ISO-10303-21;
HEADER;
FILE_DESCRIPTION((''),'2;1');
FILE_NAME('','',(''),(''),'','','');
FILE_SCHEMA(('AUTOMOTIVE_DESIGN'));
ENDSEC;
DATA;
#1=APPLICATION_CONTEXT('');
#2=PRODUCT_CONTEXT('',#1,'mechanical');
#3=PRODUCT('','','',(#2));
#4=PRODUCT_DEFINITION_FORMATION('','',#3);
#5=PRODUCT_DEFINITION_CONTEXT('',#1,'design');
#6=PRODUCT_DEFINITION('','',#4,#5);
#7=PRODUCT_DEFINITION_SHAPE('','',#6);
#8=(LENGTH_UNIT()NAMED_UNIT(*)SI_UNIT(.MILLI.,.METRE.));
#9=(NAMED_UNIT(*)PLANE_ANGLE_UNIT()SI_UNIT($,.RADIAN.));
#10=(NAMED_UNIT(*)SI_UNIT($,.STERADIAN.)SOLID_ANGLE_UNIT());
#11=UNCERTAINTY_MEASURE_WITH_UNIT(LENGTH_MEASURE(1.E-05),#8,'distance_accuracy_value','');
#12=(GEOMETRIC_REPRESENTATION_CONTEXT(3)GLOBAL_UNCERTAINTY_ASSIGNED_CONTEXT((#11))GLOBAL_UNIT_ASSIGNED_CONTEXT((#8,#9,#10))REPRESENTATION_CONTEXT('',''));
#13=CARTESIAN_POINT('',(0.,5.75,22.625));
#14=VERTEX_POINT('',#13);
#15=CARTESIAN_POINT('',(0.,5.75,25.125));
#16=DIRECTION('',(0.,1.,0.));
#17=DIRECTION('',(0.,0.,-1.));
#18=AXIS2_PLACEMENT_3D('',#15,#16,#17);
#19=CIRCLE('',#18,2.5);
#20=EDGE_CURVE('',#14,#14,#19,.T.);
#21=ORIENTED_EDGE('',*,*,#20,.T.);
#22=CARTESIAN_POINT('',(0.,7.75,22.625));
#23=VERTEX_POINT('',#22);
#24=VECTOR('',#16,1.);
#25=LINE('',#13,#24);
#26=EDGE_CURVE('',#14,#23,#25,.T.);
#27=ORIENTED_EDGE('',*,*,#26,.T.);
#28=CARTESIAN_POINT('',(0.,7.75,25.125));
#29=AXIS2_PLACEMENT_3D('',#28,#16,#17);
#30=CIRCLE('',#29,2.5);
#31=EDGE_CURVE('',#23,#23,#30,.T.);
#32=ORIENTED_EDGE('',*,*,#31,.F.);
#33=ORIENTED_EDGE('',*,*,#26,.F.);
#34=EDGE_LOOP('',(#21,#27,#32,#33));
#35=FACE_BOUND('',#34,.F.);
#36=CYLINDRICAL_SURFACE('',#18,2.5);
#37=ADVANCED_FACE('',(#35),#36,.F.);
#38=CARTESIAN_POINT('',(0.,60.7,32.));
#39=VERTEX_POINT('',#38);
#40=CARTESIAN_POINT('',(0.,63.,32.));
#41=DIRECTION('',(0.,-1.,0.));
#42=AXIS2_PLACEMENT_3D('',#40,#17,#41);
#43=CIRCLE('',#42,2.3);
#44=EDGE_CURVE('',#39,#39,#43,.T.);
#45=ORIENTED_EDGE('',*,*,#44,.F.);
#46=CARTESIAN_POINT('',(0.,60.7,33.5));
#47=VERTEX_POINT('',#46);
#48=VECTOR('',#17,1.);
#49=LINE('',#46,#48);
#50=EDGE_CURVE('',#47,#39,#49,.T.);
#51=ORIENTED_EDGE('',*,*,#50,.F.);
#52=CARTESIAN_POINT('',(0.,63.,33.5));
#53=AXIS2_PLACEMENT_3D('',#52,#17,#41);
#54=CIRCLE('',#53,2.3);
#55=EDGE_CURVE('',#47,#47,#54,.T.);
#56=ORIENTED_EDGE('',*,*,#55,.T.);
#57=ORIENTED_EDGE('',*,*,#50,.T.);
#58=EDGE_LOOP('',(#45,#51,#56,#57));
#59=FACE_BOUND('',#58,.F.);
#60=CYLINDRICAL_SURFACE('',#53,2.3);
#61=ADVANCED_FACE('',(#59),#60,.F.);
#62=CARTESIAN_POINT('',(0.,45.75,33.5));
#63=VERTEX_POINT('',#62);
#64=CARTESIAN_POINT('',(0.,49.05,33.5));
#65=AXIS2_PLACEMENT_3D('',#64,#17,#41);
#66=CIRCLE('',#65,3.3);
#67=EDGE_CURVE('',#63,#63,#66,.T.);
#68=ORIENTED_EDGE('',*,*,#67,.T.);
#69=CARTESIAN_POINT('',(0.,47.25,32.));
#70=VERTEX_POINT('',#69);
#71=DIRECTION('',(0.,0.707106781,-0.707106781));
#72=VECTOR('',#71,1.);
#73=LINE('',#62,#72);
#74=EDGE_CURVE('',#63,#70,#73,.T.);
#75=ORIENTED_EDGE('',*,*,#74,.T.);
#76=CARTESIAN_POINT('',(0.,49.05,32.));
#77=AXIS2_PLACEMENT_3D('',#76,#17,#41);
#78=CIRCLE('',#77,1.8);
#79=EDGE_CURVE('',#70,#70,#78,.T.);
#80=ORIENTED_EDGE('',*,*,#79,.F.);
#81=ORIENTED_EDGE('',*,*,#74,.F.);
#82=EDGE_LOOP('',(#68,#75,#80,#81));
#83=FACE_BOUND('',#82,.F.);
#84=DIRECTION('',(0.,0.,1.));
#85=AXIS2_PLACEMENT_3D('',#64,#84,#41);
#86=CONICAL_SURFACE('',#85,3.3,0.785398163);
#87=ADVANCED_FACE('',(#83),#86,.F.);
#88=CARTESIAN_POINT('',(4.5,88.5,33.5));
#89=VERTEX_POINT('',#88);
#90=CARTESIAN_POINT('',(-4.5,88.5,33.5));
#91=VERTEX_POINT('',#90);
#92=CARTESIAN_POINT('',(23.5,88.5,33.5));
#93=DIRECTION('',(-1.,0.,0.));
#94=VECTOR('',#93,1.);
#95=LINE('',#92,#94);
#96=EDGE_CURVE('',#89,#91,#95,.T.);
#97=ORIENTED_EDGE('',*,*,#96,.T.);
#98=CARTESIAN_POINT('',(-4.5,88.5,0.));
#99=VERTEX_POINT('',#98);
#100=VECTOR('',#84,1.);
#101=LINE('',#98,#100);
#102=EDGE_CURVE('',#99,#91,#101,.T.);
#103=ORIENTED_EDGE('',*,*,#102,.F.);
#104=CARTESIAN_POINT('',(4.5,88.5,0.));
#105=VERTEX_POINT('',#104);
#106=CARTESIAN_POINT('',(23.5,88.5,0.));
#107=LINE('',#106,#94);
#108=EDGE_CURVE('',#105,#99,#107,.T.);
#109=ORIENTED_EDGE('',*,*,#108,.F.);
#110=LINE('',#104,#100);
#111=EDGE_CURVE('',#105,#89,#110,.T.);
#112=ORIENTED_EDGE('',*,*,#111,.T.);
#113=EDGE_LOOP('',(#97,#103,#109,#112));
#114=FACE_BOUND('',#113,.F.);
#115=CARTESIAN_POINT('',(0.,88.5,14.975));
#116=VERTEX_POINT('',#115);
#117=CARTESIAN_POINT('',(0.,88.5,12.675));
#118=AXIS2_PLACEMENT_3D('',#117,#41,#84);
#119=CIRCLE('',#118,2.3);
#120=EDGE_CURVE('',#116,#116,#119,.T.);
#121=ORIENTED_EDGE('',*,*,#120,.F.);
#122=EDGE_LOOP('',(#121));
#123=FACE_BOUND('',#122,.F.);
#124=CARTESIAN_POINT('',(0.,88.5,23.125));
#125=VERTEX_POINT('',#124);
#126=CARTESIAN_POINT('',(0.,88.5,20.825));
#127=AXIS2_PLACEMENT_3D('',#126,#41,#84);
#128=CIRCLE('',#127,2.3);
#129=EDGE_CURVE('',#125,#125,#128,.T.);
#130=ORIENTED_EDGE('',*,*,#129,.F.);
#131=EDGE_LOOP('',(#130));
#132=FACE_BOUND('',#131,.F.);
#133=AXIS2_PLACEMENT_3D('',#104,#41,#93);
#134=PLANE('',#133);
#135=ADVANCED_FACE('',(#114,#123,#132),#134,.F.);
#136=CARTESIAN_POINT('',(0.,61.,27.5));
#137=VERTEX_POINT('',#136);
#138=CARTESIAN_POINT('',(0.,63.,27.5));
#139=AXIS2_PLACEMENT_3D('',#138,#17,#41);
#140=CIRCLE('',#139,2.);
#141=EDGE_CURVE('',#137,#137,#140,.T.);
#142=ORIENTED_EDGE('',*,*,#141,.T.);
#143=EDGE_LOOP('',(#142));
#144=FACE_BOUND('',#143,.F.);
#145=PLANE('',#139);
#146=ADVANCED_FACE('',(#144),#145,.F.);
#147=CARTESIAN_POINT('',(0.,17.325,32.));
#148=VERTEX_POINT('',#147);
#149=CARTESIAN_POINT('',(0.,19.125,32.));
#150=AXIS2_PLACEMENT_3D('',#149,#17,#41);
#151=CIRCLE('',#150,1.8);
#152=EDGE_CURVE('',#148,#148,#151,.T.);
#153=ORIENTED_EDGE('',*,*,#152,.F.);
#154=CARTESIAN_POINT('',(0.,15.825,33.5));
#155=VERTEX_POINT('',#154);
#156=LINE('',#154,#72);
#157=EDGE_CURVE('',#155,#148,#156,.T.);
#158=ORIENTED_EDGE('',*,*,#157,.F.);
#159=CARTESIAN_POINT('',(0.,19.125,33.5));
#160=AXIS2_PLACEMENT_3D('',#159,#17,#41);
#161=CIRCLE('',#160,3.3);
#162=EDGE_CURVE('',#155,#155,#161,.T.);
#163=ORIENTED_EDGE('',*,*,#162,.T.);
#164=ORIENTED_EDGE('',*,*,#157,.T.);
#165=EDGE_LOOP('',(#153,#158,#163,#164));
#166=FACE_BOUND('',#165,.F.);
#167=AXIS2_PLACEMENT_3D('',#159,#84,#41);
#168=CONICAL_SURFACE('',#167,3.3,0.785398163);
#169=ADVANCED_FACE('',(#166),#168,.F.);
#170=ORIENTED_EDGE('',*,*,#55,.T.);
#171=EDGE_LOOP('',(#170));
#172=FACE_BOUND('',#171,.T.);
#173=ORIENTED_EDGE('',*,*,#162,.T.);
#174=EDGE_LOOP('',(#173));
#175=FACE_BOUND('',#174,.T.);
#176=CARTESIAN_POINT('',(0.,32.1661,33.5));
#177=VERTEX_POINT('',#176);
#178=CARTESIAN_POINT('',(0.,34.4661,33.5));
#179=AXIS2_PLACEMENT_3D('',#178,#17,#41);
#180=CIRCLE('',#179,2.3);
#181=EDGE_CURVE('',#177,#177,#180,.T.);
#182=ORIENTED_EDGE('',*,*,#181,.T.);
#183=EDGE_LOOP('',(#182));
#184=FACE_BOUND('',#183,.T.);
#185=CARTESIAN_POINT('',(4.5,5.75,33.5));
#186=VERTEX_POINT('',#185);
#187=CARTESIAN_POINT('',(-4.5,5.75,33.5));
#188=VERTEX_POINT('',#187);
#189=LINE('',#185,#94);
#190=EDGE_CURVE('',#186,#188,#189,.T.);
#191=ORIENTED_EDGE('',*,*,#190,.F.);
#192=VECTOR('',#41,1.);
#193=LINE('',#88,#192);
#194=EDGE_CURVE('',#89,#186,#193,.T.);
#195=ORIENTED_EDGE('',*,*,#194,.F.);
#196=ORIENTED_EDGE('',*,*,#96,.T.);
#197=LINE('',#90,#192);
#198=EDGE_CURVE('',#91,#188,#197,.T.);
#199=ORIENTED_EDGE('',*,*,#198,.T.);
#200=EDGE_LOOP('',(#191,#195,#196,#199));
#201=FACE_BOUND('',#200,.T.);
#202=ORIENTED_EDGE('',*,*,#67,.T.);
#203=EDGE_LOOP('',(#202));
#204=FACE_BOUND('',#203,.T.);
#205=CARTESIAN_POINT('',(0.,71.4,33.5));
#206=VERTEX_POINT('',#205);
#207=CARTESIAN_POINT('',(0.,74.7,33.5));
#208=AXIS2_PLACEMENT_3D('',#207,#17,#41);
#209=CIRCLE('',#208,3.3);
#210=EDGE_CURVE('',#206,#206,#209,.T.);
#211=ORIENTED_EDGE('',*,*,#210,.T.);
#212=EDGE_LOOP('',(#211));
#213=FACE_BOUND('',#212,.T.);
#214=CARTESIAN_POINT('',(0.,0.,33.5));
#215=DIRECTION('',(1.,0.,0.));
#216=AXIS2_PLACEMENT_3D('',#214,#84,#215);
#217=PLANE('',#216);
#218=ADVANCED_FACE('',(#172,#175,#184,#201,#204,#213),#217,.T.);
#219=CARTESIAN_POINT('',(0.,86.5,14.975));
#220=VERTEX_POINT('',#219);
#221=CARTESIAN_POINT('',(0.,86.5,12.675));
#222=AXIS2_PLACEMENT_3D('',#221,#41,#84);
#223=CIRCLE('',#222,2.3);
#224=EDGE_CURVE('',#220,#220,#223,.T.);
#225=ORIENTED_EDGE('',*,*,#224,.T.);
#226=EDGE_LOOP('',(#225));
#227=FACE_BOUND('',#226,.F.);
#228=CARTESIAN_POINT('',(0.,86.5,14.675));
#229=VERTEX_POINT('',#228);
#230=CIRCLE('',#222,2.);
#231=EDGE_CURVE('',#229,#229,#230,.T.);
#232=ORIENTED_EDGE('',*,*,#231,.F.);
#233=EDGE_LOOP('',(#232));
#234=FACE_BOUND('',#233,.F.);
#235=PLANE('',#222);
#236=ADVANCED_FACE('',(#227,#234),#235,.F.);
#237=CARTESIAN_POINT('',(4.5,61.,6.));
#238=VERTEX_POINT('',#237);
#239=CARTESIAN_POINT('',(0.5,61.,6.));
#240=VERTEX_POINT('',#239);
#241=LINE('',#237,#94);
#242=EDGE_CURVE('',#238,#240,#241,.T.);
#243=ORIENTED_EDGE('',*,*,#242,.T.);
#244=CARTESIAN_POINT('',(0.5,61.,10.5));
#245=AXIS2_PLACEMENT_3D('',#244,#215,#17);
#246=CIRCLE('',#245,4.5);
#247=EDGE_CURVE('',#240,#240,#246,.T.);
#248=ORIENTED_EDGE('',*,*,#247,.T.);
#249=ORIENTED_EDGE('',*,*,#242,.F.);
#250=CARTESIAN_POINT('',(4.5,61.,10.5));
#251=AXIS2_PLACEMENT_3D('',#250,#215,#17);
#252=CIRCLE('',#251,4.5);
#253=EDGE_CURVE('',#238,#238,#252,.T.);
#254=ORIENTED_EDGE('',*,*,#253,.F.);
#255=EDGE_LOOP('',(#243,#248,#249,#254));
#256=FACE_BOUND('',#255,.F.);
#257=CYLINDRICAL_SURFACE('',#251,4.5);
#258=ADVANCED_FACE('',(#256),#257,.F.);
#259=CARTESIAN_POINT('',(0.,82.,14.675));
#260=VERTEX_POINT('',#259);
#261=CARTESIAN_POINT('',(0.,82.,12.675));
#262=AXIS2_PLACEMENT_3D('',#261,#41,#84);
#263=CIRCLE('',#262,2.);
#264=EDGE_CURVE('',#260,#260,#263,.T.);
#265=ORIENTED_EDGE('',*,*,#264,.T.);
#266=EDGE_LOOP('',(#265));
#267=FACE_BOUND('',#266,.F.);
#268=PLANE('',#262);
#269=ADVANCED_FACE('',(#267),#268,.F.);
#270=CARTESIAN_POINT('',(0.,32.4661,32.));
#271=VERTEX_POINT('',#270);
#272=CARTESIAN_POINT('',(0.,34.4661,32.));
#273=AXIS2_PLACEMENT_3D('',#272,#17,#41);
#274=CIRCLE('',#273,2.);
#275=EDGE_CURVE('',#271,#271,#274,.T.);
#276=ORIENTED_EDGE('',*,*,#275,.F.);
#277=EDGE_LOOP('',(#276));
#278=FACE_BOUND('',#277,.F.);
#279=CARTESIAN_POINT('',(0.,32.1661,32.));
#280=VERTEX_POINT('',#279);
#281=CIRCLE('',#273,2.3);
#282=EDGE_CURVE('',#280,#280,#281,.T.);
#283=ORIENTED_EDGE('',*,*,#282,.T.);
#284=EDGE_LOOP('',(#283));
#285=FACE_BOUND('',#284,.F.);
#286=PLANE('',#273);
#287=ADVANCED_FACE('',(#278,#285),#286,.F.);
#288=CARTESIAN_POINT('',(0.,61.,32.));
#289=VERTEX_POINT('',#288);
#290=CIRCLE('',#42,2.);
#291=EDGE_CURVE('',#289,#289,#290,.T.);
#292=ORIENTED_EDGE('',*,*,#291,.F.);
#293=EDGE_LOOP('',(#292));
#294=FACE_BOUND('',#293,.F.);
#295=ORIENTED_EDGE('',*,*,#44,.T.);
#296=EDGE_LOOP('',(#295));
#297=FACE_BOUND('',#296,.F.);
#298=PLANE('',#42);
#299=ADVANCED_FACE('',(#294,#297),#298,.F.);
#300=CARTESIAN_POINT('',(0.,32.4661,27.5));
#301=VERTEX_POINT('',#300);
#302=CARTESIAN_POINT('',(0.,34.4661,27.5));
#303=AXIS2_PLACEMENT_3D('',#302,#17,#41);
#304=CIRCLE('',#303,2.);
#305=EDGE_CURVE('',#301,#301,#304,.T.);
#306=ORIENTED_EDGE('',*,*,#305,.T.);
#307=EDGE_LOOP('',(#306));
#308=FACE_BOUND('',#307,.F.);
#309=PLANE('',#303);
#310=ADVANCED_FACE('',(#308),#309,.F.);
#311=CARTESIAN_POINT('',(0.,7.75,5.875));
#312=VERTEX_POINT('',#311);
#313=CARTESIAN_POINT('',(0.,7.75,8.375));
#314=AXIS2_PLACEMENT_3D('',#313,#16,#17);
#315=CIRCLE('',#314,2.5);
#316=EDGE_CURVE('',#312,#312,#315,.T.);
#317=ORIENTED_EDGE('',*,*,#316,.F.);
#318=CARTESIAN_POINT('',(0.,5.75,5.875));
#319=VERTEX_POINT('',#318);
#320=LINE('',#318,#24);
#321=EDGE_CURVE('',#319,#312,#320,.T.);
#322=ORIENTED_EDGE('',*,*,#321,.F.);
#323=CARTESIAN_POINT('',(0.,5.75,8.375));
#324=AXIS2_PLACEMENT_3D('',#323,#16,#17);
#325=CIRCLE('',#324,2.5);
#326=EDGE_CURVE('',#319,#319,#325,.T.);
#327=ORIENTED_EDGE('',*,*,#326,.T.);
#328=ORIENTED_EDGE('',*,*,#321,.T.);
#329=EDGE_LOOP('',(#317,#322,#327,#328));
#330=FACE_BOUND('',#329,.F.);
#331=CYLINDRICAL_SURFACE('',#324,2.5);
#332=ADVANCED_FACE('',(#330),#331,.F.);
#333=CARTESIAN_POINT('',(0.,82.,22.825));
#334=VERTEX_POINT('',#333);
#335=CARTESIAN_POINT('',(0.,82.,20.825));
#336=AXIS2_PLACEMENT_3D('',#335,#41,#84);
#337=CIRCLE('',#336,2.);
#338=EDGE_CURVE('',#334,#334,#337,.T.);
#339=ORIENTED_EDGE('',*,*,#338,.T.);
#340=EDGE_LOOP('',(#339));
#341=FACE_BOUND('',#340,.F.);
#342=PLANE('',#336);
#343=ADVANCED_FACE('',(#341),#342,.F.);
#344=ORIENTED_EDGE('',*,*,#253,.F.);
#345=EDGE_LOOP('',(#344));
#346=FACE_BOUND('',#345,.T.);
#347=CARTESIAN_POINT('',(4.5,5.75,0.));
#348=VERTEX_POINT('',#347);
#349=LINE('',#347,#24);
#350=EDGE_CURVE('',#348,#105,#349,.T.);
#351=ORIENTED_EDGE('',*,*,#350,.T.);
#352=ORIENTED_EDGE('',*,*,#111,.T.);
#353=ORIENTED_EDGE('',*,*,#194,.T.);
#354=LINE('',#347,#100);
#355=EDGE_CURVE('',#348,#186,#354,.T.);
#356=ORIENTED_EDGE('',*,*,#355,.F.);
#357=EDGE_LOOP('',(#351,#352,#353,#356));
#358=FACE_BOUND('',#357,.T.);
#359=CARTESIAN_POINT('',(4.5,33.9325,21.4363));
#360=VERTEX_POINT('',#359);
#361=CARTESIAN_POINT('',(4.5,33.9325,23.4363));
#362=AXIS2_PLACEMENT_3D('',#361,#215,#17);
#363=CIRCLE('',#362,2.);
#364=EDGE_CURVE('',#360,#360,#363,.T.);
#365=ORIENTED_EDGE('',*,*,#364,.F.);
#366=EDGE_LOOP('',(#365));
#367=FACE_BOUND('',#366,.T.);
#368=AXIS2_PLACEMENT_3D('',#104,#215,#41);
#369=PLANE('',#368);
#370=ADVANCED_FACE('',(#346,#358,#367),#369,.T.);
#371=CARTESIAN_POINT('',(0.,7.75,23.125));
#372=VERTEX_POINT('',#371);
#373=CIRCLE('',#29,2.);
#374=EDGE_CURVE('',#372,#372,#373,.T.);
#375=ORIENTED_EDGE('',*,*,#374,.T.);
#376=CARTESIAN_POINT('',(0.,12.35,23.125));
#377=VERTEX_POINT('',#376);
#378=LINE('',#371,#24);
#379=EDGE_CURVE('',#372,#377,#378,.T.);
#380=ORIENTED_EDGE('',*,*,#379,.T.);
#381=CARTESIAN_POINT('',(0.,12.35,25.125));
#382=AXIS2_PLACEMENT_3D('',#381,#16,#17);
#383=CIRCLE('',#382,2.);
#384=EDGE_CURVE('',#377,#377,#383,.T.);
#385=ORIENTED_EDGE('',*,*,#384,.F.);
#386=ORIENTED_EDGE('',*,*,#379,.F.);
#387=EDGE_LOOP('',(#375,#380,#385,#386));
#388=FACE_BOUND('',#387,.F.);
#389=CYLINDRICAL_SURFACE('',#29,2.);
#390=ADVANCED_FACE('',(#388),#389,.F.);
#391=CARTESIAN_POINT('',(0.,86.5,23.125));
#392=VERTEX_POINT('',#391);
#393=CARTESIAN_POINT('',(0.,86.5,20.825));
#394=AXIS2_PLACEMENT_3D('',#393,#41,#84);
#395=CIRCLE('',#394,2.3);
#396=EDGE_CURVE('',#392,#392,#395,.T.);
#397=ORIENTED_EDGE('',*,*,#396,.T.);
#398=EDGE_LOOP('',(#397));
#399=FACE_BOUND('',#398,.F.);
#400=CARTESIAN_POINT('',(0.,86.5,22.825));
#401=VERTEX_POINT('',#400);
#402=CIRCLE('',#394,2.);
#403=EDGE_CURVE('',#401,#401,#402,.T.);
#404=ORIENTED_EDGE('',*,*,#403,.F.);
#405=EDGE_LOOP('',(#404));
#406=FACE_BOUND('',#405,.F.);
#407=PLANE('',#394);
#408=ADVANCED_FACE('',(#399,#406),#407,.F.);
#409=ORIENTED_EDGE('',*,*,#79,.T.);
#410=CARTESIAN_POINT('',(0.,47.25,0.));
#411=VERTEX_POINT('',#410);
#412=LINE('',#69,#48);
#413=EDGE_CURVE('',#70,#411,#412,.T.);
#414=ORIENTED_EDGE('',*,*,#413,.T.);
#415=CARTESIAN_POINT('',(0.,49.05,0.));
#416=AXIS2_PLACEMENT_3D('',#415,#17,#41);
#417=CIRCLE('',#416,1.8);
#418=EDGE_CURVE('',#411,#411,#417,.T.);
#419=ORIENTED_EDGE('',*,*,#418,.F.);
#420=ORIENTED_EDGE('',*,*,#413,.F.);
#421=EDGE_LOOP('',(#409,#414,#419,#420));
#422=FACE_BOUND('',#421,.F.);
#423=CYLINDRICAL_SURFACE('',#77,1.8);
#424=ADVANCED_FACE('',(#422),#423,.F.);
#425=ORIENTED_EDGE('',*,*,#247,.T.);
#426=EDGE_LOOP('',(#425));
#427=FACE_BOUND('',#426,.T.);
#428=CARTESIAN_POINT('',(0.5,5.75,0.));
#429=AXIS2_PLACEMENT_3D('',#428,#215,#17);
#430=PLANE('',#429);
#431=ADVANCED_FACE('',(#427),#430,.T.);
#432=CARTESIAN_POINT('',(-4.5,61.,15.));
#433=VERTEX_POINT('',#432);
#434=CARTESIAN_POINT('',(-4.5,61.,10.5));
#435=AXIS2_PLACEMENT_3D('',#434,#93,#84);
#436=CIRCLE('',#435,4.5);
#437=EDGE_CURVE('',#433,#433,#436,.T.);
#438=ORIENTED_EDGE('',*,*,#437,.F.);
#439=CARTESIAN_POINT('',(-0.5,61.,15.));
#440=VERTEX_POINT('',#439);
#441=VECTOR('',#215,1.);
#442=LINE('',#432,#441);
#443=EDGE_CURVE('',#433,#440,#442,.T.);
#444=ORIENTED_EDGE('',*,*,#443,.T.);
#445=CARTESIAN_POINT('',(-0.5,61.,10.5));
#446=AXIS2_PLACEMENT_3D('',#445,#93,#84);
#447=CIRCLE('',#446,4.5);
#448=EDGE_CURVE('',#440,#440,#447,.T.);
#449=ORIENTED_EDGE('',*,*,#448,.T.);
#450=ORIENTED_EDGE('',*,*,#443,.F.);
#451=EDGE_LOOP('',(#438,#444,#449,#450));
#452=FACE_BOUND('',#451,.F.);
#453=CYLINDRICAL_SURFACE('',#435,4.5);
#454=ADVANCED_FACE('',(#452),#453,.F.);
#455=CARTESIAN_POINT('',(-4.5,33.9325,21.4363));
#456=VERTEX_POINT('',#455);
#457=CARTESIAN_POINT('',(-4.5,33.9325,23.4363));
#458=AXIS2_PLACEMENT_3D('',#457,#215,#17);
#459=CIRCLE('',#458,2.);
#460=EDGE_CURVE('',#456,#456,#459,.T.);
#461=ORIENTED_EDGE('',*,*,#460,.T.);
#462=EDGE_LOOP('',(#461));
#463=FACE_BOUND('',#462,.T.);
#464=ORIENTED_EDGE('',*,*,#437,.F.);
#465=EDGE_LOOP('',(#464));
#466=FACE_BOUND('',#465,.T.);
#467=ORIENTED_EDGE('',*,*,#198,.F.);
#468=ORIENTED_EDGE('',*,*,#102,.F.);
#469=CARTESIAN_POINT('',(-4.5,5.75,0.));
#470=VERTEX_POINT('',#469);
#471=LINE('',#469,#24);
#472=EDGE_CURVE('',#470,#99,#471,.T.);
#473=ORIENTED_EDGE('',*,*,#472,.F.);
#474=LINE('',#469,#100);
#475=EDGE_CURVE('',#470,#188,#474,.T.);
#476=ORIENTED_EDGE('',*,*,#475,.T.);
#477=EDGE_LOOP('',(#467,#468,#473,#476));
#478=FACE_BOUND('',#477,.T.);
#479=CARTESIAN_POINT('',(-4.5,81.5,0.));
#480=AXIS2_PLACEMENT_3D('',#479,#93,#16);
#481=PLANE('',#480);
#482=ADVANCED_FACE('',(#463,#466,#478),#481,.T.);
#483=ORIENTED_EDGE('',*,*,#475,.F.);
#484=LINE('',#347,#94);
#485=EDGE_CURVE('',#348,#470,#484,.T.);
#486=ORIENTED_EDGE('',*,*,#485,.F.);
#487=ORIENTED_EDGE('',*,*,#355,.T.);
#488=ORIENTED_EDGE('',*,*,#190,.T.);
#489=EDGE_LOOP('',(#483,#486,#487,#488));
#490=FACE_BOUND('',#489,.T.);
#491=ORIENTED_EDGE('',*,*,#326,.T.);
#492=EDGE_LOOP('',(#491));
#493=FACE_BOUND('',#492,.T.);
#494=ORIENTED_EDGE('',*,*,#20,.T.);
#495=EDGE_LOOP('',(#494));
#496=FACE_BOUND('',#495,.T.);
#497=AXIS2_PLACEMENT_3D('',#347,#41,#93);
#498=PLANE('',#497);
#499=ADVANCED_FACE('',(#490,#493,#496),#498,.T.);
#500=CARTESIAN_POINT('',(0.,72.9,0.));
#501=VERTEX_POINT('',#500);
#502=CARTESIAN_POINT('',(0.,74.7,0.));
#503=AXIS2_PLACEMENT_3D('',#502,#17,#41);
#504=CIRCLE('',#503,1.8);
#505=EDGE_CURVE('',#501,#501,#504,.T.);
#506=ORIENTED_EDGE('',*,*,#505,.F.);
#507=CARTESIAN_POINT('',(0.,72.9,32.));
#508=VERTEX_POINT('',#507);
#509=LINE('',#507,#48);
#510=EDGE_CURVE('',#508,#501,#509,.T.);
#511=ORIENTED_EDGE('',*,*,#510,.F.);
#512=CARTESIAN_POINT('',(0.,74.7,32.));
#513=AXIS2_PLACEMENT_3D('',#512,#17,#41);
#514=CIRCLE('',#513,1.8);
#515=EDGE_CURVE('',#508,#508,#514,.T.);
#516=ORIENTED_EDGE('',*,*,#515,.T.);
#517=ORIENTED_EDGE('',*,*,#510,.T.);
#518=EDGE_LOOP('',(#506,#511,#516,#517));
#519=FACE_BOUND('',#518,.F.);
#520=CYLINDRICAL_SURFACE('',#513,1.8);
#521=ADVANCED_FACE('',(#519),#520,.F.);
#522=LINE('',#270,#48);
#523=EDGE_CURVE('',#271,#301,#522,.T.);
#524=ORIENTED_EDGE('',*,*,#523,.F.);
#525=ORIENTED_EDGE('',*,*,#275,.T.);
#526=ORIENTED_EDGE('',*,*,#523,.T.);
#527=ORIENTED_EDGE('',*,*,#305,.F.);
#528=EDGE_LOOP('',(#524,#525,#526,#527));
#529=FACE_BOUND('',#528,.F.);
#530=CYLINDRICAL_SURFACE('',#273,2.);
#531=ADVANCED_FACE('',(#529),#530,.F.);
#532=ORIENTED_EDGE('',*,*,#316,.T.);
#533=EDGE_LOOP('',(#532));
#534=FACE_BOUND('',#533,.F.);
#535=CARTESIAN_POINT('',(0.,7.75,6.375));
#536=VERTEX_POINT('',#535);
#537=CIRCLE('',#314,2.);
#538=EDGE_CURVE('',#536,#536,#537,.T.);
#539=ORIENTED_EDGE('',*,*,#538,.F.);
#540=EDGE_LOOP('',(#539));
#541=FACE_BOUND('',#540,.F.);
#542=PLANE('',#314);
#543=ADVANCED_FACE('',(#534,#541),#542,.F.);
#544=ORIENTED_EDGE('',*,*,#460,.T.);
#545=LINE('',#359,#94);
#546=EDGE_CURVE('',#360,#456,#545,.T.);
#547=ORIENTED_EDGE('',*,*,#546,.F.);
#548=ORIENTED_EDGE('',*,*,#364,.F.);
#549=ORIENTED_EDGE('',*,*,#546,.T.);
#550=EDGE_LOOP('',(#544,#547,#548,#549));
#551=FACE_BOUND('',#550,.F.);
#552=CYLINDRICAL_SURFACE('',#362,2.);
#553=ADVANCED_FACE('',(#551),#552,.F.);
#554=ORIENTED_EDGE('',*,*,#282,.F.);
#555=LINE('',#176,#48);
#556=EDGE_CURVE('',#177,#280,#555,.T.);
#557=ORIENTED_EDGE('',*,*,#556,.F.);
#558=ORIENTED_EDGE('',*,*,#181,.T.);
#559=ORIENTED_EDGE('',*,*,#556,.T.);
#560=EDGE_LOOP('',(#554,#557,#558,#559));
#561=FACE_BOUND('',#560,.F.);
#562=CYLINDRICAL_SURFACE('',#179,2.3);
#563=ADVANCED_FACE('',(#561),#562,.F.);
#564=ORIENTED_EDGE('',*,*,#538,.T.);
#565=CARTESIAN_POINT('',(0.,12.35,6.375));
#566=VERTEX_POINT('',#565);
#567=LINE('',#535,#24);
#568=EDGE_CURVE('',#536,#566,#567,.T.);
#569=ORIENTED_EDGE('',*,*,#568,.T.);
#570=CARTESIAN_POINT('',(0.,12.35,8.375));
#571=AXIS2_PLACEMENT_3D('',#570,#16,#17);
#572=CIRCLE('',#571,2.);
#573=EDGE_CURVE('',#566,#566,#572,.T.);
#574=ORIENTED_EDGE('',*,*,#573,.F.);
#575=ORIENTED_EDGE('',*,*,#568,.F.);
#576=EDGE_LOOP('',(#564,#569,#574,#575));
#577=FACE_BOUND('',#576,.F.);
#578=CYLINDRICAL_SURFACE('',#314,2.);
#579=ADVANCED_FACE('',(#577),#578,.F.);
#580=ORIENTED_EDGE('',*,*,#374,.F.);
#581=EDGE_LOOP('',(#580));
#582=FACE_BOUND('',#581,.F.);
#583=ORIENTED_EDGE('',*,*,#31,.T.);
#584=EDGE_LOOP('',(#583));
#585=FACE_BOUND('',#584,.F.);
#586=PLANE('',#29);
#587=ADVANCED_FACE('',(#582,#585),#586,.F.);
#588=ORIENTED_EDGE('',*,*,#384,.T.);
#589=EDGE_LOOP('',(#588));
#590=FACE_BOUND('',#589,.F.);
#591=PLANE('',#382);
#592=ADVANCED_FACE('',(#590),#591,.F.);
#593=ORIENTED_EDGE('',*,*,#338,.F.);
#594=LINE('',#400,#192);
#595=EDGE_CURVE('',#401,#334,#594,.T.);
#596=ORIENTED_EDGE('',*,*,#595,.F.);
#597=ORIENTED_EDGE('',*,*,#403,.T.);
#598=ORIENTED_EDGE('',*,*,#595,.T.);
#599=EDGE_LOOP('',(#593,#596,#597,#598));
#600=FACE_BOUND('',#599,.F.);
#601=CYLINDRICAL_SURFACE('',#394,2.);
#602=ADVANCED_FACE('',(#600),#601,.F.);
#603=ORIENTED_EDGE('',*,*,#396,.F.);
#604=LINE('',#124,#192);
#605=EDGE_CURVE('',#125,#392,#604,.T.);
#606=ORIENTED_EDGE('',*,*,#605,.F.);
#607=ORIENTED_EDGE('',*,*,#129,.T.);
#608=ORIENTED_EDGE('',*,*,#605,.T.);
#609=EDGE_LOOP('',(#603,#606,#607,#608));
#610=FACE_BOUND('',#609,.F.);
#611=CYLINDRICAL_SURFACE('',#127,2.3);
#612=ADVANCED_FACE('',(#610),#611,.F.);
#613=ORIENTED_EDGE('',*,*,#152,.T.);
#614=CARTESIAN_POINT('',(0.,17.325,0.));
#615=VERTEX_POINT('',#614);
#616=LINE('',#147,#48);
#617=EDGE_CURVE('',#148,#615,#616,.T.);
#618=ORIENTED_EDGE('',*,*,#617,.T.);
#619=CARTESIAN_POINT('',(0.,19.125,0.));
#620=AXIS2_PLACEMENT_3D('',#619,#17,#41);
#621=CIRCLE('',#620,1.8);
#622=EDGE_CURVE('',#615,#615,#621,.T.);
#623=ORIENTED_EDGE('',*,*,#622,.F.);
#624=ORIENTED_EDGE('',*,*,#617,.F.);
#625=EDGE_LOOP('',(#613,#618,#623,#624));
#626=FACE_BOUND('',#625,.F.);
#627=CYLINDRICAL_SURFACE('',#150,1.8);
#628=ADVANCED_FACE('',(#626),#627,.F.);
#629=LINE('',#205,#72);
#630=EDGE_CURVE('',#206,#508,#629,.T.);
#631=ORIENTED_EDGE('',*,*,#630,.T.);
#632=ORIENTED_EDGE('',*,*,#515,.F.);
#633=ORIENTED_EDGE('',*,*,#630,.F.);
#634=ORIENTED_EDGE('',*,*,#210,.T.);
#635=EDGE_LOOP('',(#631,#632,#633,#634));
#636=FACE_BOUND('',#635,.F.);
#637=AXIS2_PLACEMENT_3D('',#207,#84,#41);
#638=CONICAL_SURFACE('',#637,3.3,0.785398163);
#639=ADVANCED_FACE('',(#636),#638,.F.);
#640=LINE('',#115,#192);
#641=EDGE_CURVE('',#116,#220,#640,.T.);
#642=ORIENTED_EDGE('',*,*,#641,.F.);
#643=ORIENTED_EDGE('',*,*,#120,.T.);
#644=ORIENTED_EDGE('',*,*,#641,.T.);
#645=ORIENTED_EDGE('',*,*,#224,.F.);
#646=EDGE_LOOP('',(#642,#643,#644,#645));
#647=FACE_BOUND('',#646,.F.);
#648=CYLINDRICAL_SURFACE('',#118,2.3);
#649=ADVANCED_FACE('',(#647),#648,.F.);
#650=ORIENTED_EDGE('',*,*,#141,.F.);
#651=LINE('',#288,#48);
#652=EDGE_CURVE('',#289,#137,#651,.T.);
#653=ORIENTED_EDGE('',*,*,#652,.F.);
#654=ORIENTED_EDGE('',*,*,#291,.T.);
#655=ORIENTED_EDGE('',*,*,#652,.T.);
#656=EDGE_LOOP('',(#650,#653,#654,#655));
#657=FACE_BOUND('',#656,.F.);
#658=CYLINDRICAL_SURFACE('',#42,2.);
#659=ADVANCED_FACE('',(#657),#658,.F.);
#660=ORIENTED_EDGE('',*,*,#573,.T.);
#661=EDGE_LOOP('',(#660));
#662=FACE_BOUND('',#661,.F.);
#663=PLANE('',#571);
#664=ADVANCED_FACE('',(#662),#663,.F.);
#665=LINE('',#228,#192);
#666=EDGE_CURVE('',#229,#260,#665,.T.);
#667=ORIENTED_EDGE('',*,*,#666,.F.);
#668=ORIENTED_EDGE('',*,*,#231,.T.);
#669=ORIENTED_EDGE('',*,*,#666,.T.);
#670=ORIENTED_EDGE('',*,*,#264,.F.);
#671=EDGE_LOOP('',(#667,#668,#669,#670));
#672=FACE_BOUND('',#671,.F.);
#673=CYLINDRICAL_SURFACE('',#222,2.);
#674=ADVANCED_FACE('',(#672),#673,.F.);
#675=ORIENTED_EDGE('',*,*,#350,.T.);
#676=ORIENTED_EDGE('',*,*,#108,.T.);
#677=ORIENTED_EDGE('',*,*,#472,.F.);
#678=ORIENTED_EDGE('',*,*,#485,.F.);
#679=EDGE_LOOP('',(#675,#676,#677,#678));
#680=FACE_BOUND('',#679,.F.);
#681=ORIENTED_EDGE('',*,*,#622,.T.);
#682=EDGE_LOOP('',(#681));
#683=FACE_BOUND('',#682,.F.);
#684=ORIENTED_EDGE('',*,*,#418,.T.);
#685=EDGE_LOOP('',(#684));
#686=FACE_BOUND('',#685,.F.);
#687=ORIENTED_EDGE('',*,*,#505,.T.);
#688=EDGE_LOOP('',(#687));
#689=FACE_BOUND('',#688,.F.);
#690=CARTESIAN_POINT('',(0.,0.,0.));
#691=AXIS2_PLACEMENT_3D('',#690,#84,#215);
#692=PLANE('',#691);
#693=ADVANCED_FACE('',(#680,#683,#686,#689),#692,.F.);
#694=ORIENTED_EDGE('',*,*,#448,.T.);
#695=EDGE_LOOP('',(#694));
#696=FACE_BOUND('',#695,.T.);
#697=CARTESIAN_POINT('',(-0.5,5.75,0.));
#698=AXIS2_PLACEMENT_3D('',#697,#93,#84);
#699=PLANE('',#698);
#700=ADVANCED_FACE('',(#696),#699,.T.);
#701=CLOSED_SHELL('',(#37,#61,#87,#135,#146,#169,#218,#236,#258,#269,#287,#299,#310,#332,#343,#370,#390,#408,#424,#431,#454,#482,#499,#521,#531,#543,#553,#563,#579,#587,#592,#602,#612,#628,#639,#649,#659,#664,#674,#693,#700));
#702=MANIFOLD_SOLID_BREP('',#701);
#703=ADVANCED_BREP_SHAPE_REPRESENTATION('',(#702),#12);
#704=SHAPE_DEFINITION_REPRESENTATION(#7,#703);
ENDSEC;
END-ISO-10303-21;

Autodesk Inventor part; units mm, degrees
ref_plane "YZ Plane" through (0, 0, 0) normal (1, 0, 0) x (0, 1, 0)
ref_plane "XZ Plane" through (0, 0, 0) normal (0, 1, 0) x (-1, 0, 0)
ref_plane "Work Plane1" through (0, 0, 0) normal (0, 0, 1) x (1, 0, 0)
ref_plane "Work Plane2" through (-89, -40.3889, 33.5) normal (0, 0, 1) x (1, 0, 0)
sketch "Sketch1" plane through (0, 0, 0) normal (0, 0, 1) x (1, 0, 0)
  line L0 (23.5, 88.5) -> (-23.5, 88.5) projected
  line L1 (-23.5, 88.5) -> (-23.5, 36.5) projected
  line L2 (-26.5, 33.5) -> (-89, 33.5) projected
  line L3 (-89, 33.5) -> (-89, -72.5) projected
  line L4 (-89, -72.5) -> (-77, -72.5) projected
  line L5 (-74, -75.5) -> (-74, -93.5) projected
  line L6 (-74, -93.5) -> (74, -93.5) projected
  line L7 (74, -93.5) -> (74, -75.5) projected
  line L8 (77, -72.5) -> (89, -72.5) projected
  line L9 (89, -72.5) -> (89, 33.5) projected
  line L10 (89, 33.5) -> (26.5, 33.5) projected
  line L11 (23.5, 36.5) -> (23.5, 88.5) projected
  line L12 (-4.5, 81.5) -> (-4.5, 36.5) projected
  line L13 (-7.5, 33.5) -> (-13.5, 33.5) projected
  line L14 (-16.5, 36.5) -> (-16.5, 81.5) projected
  line L15 (-13.5, 84.5) -> (-7.5, 84.5) projected
  line L16 (16.5, 81.5) -> (16.5, 36.5) projected
  line L17 (13.5, 33.5) -> (7.5, 33.5) projected
  line L18 (4.5, 36.5) -> (4.5, 81.5) projected
  line L19 (7.5, 84.5) -> (13.5, 84.5) projected
  line L20 (-4.5, 88.5) -> (4.5, 88.5)
  line L21 (4.5, 88.5) -> (4.5, 5.75)
  line L22 (4.5, 5.75) -> (-4.5, 5.75)
  line L23 (-4.5, 5.75) -> (-4.5, 88.5)
  line L24 (-32.2, 4.75) -> (-59.9, 4.75)
  arc A0 (13.5, 33.5) -> (16.5, 36.5) centre (13.5, 36.5) ccw projected
  arc A1 (4.5, 36.5) -> (7.5, 33.5) centre (7.5, 36.5) ccw projected
  arc A2 (7.5, 84.5) -> (4.5, 81.5) centre (7.5, 81.5) ccw projected
  arc A3 (16.5, 81.5) -> (13.5, 84.5) centre (13.5, 81.5) ccw projected
  arc A4 (-4.5, 81.5) -> (-7.5, 84.5) centre (-7.5, 81.5) ccw projected
  arc A5 (-7.5, 33.5) -> (-4.5, 36.5) centre (-7.5, 36.5) ccw projected
  arc A6 (-16.5, 36.5) -> (-13.5, 33.5) centre (-13.5, 36.5) ccw projected
  arc A7 (-13.5, 84.5) -> (-16.5, 81.5) centre (-13.5, 81.5) ccw projected
  arc A8 (-26.5, 33.5) -> (-23.5, 36.5) centre (-26.5, 36.5) ccw projected
  arc A9 (-74, -75.5) -> (-77, -72.5) centre (-77, -75.5) ccw projected
  arc A10 (77, -72.5) -> (74, -75.5) centre (77, -75.5) ccw projected
  arc A11 (23.5, 36.5) -> (26.5, 33.5) centre (26.5, 36.5) ccw projected
  circle A12 centre (39.125, 25.9125) radius 1.0065 projected
  circle A13 centre (72.95, 12.275) radius 1.0065 projected
  circle A14 centre (-39.125, 12.3375) radius 1.0065 projected
  circle A15 centre (-72.95, 25.975) radius 1.0065 projected
  circle A16 centre (-72.95, 12.275) radius 1.0065 projected
  circle A17 centre (-39.125, 25.9125) radius 1.0065 projected
  circle A18 centre (72.95, 25.975) radius 1.0065 projected
  circle A19 centre (39.125, 12.3375) radius 1.0065 projected
  circle A20 centre (-24.1, -73.1) radius 1.2295 projected
  circle A21 centre (-42.4984, -44.6666) radius 1.2295 projected
  circle A22 centre (-79, -42.3889) radius 1.2295 projected
  circle A23 centre (-19.5, 28.875) radius 1.2295 projected
  circle A24 centre (19.5, 9.55) radius 1.2295 projected
  circle A25 centre (19.5, 47.3) radius 1.2295 projected
  circle A26 centre (-19.5, 47.3) radius 1.2295 projected
  circle A27 centre (0, 74.7) radius 1.2295 projected
  circle A28 centre (-19.4231, 74.8077) radius 1.2295 projected
  circle A29 centre (19.5, 74.7) radius 1.2295 projected
  circle A30 centre (0, 49.05) radius 1.2295 projected
  circle A31 centre (19.5, 28.875) radius 1.2295 projected
  circle A32 centre (0, 19.125) radius 1.2295 projected
  circle A33 centre (-19.5, 9.55) radius 1.2295 projected
  circle A34 centre (24.1, -73.1) radius 1.2295 projected
  circle A35 centre (42.5, -44.6649) radius 1.2295 projected
  circle A36 centre (79, -42.3889) radius 1.2295 projected
  circle A37 centre (21.5, -85.5) radius 1.8 projected
  circle A38 centre (-64.5, -85.5) radius 1.8 projected
  circle A39 centre (-21.5, -85.5) radius 1.8 projected
  circle A40 centre (64.5, -85.5) radius 1.8 projected
  line L25 (-58.2315, -77.6013) -> (-80.7685, -61.1541) projected
  line L26 (-82, -58.7308) -> (-82, -48.3889) projected
  line L27 (-75.8885, -45.3972) -> (-47.1423, -47.5438) projected
  line L28 (-21.1, -26.5751) -> (-21.1, -22.0813) projected
  line L29 (-46.9357, -41.5592) -> (-76, -39.3889) projected
  line L30 (-82, -36.3889) -> (-82, 1.75) projected
  line L31 (32.9914, 4.75) -> (79, 4.75) projected
  line L32 (82, -48.3889) -> (82, -58.7308) projected
  line L33 (76, -39.3889) -> (46.9371, -41.5577) projected
  line L34 (21.1, -22.0813) -> (21.1, -26.5749) projected
  line L35 (47.144, -47.5423) -> (76, -45.3889) projected
  line L36 (82, 1.75) -> (82, -36.3889) projected
  line L37 (80.7685, -61.1541) -> (58.2315, -77.6013) projected
  line L38 (57, -80.0246) -> (57, -87.5) projected
  arc A41 (55, -89.5) -> (57, -87.5) centre (55, -87.5) ccw projected
  line L39 (55, -89.5) -> (31, -89.5) projected
  arc A42 (29, -87.5) -> (31, -89.5) centre (31, -87.5) ccw projected
  line L40 (29, -87.5) -> (29, -79.2522) projected
  line L41 (14, -79.5039) -> (14, -87.5) projected
  arc A43 (12, -89.5) -> (14, -87.5) centre (12, -87.5) ccw projected
  line L42 (12, -89.5) -> (-12, -89.5) projected
  arc A44 (-14, -87.5) -> (-12, -89.5) centre (-12, -87.5) ccw projected
  line L43 (-14, -87.5) -> (-14, -79.5039) projected
  line L44 (-29, -79.2522) -> (-29, -87.5) projected
  arc A45 (-31, -89.5) -> (-29, -87.5) centre (-31, -87.5) ccw projected
  line L45 (-31, -89.5) -> (-55, -89.5) projected
  arc A46 (-57, -87.5) -> (-55, -89.5) centre (-55, -87.5) ccw projected
  line L46 (-57, -87.5) -> (-57, -80.0246) projected
  line L47 (-66.95, 28.9125) -> (-45.125, 28.9125) projected
  line L48 (-42.125, 25.9125) -> (-42.125, 12.275) projected
  line L49 (-45.125, 9.275) -> (-66.95, 9.275) projected
  line L50 (-69.95, 12.275) -> (-69.95, 25.9125) projected
  line L51 (-16.5, 12.75) -> (-16.5, 25.5) projected
  line L52 (-13.5, 28.5) -> (-7.5, 28.5) projected
  line L53 (-4.5, 25.5) -> (-4.5, 12.75) projected
  line L54 (-7.5, 9.75) -> (-13.5, 9.75) projected
  line L55 (66.95, 9.3375) -> (45.125, 9.3375) projected
  line L56 (42.125, 12.3375) -> (42.125, 25.975) projected
  line L57 (45.125, 28.975) -> (66.95, 28.975) projected
  line L58 (69.95, 25.975) -> (69.95, 12.3375) projected
  line L59 (4.5, 12.75) -> (4.5, 25.5) projected
  line L60 (7.5, 28.5) -> (13.5, 28.5) projected
  line L61 (16.5, 25.5) -> (16.5, 12.75) projected
  line L62 (13.5, 9.75) -> (7.5, 9.75) projected
  line L63 (44.5181, -40.6102) -> (28.0504, -22.9209) projected
  line L64 (27.268, -20.5154) -> (30.0132, 2.1113) projected
  line L65 (-44.7206, -49.1201) -> (-29.3549, -77.8368) projected
  line L66 (-79, 4.75) -> (-32.9914, 4.75) projected
  line L67 (-30.0132, 2.1113) -> (-27.268, -20.5155) projected
  line L68 (-28.0502, -22.9208) -> (-44.5164, -40.6115) projected
  line L69 (29.3549, -77.8368) -> (44.7222, -49.1185) projected
  line L70 (-14.6042, -77.6983) -> (-37.8537, -46.8489) projected
  line L71 (-37.4786, -42.8259) -> (-22.0793, -28.7924) projected
  line L72 (-21.1218, -21.72) -> (-23.9255, 1.3887) projected
  line L73 (-20.9474, 4.75) -> (20.9474, 4.75) projected
  line L74 (23.9255, 1.3887) -> (21.1218, -21.72) projected
  line L75 (22.0795, -28.7925) -> (37.4798, -42.8243) projected
  line L76 (37.8551, -46.8475) -> (14.6042, -77.6983) projected
  circle A47 centre (-78, -67.1725) radius 1.2295 projected
  arc A48 (79, -39.3889) -> (82, -36.3889) centre (79, -36.3889) ccw projected
  arc A49 (44.5181, -40.6102) -> (46.9371, -41.5577) centre (46.7138, -38.566) ccw projected
  arc A50 (27.268, -20.5154) -> (28.0504, -22.9209) centre (30.2461, -20.8767) ccw projected
  arc A51 (32.9914, 4.75) -> (30.0132, 2.1113) centre (32.9914, 1.75) ccw projected
  arc A52 (82, 1.75) -> (79, 4.75) centre (79, 1.75) ccw projected
  arc A53 (-42.125, 25.9125) -> (-45.125, 28.9125) centre (-45.125, 25.9125) ccw projected
  arc A54 (-45.125, 9.275) -> (-42.125, 12.275) centre (-45.125, 12.275) ccw projected
  arc A55 (-69.95, 12.275) -> (-66.95, 9.275) centre (-66.95, 12.275) ccw projected
  arc A56 (-66.95, 28.9125) -> (-69.95, 25.9125) centre (-66.95, 25.9125) ccw projected
  arc A57 (-13.5, 28.5) -> (-16.5, 25.5) centre (-13.5, 25.5) ccw projected
  arc A58 (-4.5, 25.5) -> (-7.5, 28.5) centre (-7.5, 25.5) ccw projected
  arc A59 (-7.5, 9.75) -> (-4.5, 12.75) centre (-7.5, 12.75) ccw projected
  arc A60 (-16.5, 12.75) -> (-13.5, 9.75) centre (-13.5, 12.75) ccw projected
  arc A61 (58.2315, -77.6013) -> (57, -80.0246) centre (60, -80.0246) ccw projected
  arc A62 (29.3549, -77.8368) -> (29, -79.2522) centre (32, -79.2522) ccw projected
  arc A63 (47.144, -47.5423) -> (44.7222, -49.1185) centre (47.3673, -50.5339) ccw projected
  arc A64 (82, -48.3889) -> (79, -45.3889) centre (79, -48.3889) ccw projected
  arc A65 (80.7685, -61.1541) -> (82, -58.7308) centre (79, -58.7308) ccw projected
  arc A66 (-21.1, -22.0813) -> (-21.1218, -21.72) centre (-24.1, -22.0813) ccw projected
  arc A67 (-20.9474, 4.75) -> (-23.9255, 1.3887) centre (-20.9474, 1.75) ccw projected
  arc A68 (23.9255, 1.3887) -> (20.9474, 4.75) centre (20.9474, 1.75) ccw projected
  arc A69 (21.1218, -21.72) -> (21.1, -22.0813) centre (24.1, -22.0813) ccw projected
  arc A70 (21.1, -26.5749) -> (22.0795, -28.7925) centre (24.1, -26.5749) ccw projected
  arc A71 (37.8551, -46.8475) -> (37.4798, -42.8243) centre (35.4593, -45.0419) ccw projected
  arc A72 (14.6042, -77.6983) -> (14, -79.5039) centre (17, -79.5039) ccw projected
  arc A73 (-14, -79.5039) -> (-14.6042, -77.6983) centre (-17, -79.5039) ccw projected
  arc A74 (-37.4786, -42.8259) -> (-37.8537, -46.8489) centre (-35.4579, -45.0433) ccw projected
  arc A75 (-22.0793, -28.7924) -> (-21.1, -26.5751) centre (-24.1, -26.5751) ccw projected
  arc A76 (-82, -36.3889) -> (-79, -39.3889) centre (-79, -36.3889) ccw projected
  arc A77 (-79, 4.75) -> (-82, 1.75) centre (-79, 1.75) ccw projected
  arc A78 (-30.0132, 2.1113) -> (-32.9914, 4.75) centre (-32.9914, 1.75) ccw projected
  arc A79 (-28.0502, -22.9208) -> (-27.268, -20.5155) centre (-30.2461, -20.8769) ccw projected
  arc A80 (-46.9357, -41.5592) -> (-44.5164, -40.6115) centre (-46.7123, -38.5676) ccw projected
  arc A81 (7.5, 28.5) -> (4.5, 25.5) centre (7.5, 25.5) ccw projected
  arc A82 (16.5, 25.5) -> (13.5, 28.5) centre (13.5, 25.5) ccw projected
  arc A83 (13.5, 9.75) -> (16.5, 12.75) centre (13.5, 12.75) ccw projected
  arc A84 (4.5, 12.75) -> (7.5, 9.75) centre (7.5, 12.75) ccw projected
  arc A85 (-57, -80.0246) -> (-58.2315, -77.6013) centre (-60, -80.0246) ccw projected
  arc A86 (-82, -58.7308) -> (-80.7685, -61.1541) centre (-79, -58.7308) ccw projected
  arc A87 (-75.8885, -45.3972) -> (-76.1119, -45.3889) centre (-76.1119, -48.3889) ccw projected
  arc A88 (-44.7206, -49.1201) -> (-47.1423, -47.5438) centre (-47.3657, -50.5355) ccw projected
  arc A89 (-29, -79.2522) -> (-29.3549, -77.8368) centre (-32, -79.2522) ccw projected
  arc A90 (42.125, 12.3375) -> (45.125, 9.3375) centre (45.125, 12.3375) ccw projected
  arc A91 (45.125, 28.975) -> (42.125, 25.975) centre (45.125, 25.975) ccw projected
  arc A92 (69.95, 25.975) -> (66.95, 28.975) centre (66.95, 25.975) ccw projected
  arc A93 (66.95, 9.3375) -> (69.95, 12.3375) centre (66.95, 12.3375) ccw projected
  circle A94 centre (78, -67.1725) radius 1.2295 projected
  line L77 (-22.5, 25.9125) -> (-22.5, 12.55) projected
  arc A95 (-25.5, 9.55) -> (-22.5, 12.55) centre (-25.5, 12.55) ccw projected
  line L78 (-25.5, 9.55) -> (-33.125, 9.55) projected
  arc A96 (-36.125, 12.55) -> (-33.125, 9.55) centre (-33.125, 12.55) ccw projected
  line L79 (-36.125, 12.55) -> (-36.125, 25.9125) projected
  arc A97 (-33.125, 28.9125) -> (-36.125, 25.9125) centre (-33.125, 25.9125) ccw projected
  line L80 (-33.125, 28.9125) -> (-25.5, 28.9125) projected
  arc A98 (-22.5, 25.9125) -> (-25.5, 28.9125) centre (-25.5, 25.9125) ccw projected
  line L81 (76, -45.3889) -> (79, -45.3889) projected
  line L82 (79, -39.3889) -> (76, -39.3889) projected
  line L83 (33.125, 9.275) -> (25.5, 9.275) projected
  arc A99 (22.5, 12.275) -> (25.5, 9.275) centre (25.5, 12.275) ccw projected
  line L84 (22.5, 12.275) -> (22.5, 25.9125) projected
  arc A100 (25.5, 28.9125) -> (22.5, 25.9125) centre (25.5, 25.9125) ccw projected
  line L85 (25.5, 28.9125) -> (33.125, 28.9125) projected
  arc A101 (36.125, 25.9125) -> (33.125, 28.9125) centre (33.125, 25.9125) ccw projected
  line L86 (36.125, 25.9125) -> (36.125, 12.275) projected
  arc A102 (33.125, 9.275) -> (36.125, 12.275) centre (33.125, 12.275) ccw projected
  line L87 (-83, 28.975) -> (-78.95, 28.975) projected
  arc A103 (-75.95, 25.975) -> (-78.95, 28.975) centre (-78.95, 25.975) ccw projected
  line L88 (-75.95, 25.975) -> (-75.95, 12.275) projected
  arc A104 (-78.95, 9.275) -> (-75.95, 12.275) centre (-78.95, 12.275) ccw projected
  line L89 (-78.95, 9.275) -> (-83, 9.275) projected
  arc A105 (-86, 12.275) -> (-83, 9.275) centre (-83, 12.275) ccw projected
  line L90 (-86, 12.275) -> (-86, 25.975) projected
  arc A106 (-83, 28.975) -> (-86, 25.975) centre (-83, 25.975) ccw projected
  arc A107 (-79, -45.3889) -> (-82, -48.3889) centre (-79, -48.3889) ccw projected
  line L91 (-79, -45.3889) -> (-76.1119, -45.3889) projected
  line L92 (-76, -39.3889) -> (-79, -39.3889) projected
  line L93 (78.95, 28.975) -> (83, 28.975) projected
  arc A108 (86, 25.975) -> (83, 28.975) centre (83, 25.975) ccw projected
  line L94 (86, 25.975) -> (86, 12.275) projected
  arc A109 (83, 9.275) -> (86, 12.275) centre (83, 12.275) ccw projected
  line L95 (83, 9.275) -> (78.95, 9.275) projected
  arc A110 (75.95, 12.275) -> (78.95, 9.275) centre (78.95, 12.275) ccw projected
  line L96 (75.95, 12.275) -> (75.95, 25.975) projected
  arc A111 (78.95, 28.975) -> (75.95, 25.975) centre (78.95, 25.975) ccw projected
  circle A112 centre (24.1, -24.9) radius 1.2295 projected
  circle A113 centre (-24.1, -24.9) radius 1.2295 projected
  point P0 (0, 0)
  point P1 (-4.5, 81.5)
  point P2 (-4.5, 36.5)
  point P3 (7.5, 81.5)
  point P4 (13.5, 81.5)
  point P5 (-7.5, 81.5)
  point P6 (-13.5, 81.5)
  point P7 (39, -44.2094)
  point P8 (-4.5, 28.5)
  point P9 (-4.5, 9.75)
  point P10 (4.5, 9.75)
  point P11 (4.5, 28.5)
  point P12 (-79, -67.8878)
  point P13 (-79, -66.4572)
  dimension "d41" = 1
extrude "Extrusion1" add sketch "Sketch1" along normal up to surface (33.5 mm away) contours L21 L18 L22 L23 L12 L0 | A27 | A30 | A32
sketch "Sketch2" plane through (4.5, 5.75, 0) normal (1, 0, 0) x (0, 0, -1)
  circle A0 centre (-23.4363, 28.1825) radius 2 projected
  point P0 (0, -5.75)
extrude "Extrusion2" cut sketch "Sketch2" against normal blind 10
sketch "Sketch3" plane through (4.5, 5.75, 0) normal (1, 0, 0) x (0, 0, -1)
  circle A0 centre (-10.5, 55.25) radius 4.5 projected
  point P0 (0, -5.75)
extrude "Extrusion3" cut sketch "Sketch3" against normal blind 4
sketch "Sketch4" plane through (-4.5, 5.75, 0) normal (-1, 0, 0) x (0, 0, 1)
  circle A0 centre (10.5, 55.25) radius 4.5 projected
  point P0 (0, -5.75)
extrude "Extrusion4" cut sketch "Sketch4" against normal blind 4
sketch "Sketch5" plane through (-4.5, 5.75, 33.5) normal (0, 0, 1) x (1, 0, 0)
  line L0 (5, 59.75) -> (5, 50.75) projected
  line L1 (4, 50.75) -> (4, 59.75) projected
  line L2 (9, 26.1825) -> (0, 26.1825) projected
  line L3 (9, 30.1825) -> (0, 30.1825) projected
  line L4 (17, 78.15) -> (-8, 78.15)
  line L5 (-8, 35.85) -> (17, 35.85)
  line L6 (9, 82.75) -> (9, 0) projected
  line L7 (0, 50.75) -> (0, 59.75) projected
  line L8 (9, 35.85) -> (0, 35.85)
  line L9 (0, 35.85) -> (0, 50.75)
  line L10 (0, 50.75) -> (9, 50.75)
  line L11 (9, 50.75) -> (9, 35.85)
  line L12 (0, 0) -> (0, 82.75) projected
  line L13 (9, 78.15) -> (0, 78.15)
  line L14 (0, 78.15) -> (0, 59.75)
  line L15 (0, 59.75) -> (9, 59.75)
  line L16 (9, 59.75) -> (9, 78.15)
  line L17 (-18, 6.625) -> (-18, 20.125) projected
  line L18 (-18, 13.375) -> (27, 13.375)
  line L19 (9, 35.85) -> (0, 50.75)
  line L20 (9, 59.75) -> (9, 50.75) projected
  line L21 (0, 35.85) -> (9, 50.75)
  line L22 (9, 59.75) -> (0, 78.15)
  line L23 (0, 59.75) -> (9, 78.15)
  point P0 (4.5, -5.75)
  point P1 (4.5, 13.375)
  point P2 (4.5, 43.3)
  point P3 (4.5, 68.95)
  dimension "d9" = 4.5
  dimension "d10" = 4.5
hole "Hole1" at (0, 19.125, 33.5) at (0, 49.05, 33.5) at (0, 74.7, 33.5) direction (0, 0, -1) diameter 3.6 end through all countersink diameter 6.6 countersink angle 90 clearance for "Countersunk Flat Head Screw ISO 2009/7046" size "M3" standard "ISO"
sketch "Sketch6" plane through (-4.5, 5.75, 0) normal (0, -1, 0) x (1, 0, 0)
  line L0 (9, 33.5) -> (0, 33.5) projected
  line L1 (0, 0) -> (0, 33.5) projected
  line L2 (0, 0) -> (9, 0) projected
  line L3 (9, 0) -> (9, 33.5) projected
  line L4 (0, 16.75) -> (9, 16.75)
  line L5 (9, 16.75) -> (0, 33.5)
  line L6 (9, 33.5) -> (0, 16.75)
  line L7 (0, 16.75) -> (9, 0)
  line L8 (9, 16.75) -> (0, 0)
  point P0 (4.5, 0)
  point P1 (4.5, 8.375)
  point P2 (4.5, 25.125)
hole "Hole2" at (0, 5.75, 8.375) at (0, 5.75, 25.125) direction (0, 1, 0) diameter 4 depth 6.6 counterbore diameter 5 counterbore depth 2
sketch "Sketch7" plane through (-4.5, 88.5, 0) normal (0, 1, 0) x (1, 0, 0)
  line L0 (0, -33.5) -> (9, -33.5) projected
  line L1 (0, -33.5) -> (9, -33.5) projected
  line L2 (9, 0) -> (9, -33.5) projected
  line L3 (9, 0) -> (0, 0) projected
  line L4 (0, 0) -> (0, -33.5) projected
  line L5 (-8, -1.4) -> (-8, -6.6) projected
  line L6 (-8, -32.1) -> (-8, -26.9) projected
  line L7 (17, -32.1) -> (17, -26.9) projected
  line L8 (17, -1.4) -> (17, -6.6) projected
  line L9 (17, -32.1) -> (-8, -32.1)
  line L10 (-8, -32.1) -> (-8, -26.9)
  line L11 (-8, -26.9) -> (17, -26.9)
  line L12 (17, -26.9) -> (17, -32.1)
  line L13 (-8, -6.6) -> (17, -6.6)
  line L14 (17, -6.6) -> (17, -1.4)
  line L15 (17, -1.4) -> (-8, -1.4)
  line L16 (-8, -1.4) -> (-8, -6.6)
  line L17 (17, -6.6) -> (-8, -6.6)
  line L18 (-8, -6.6) -> (-8, -8.6)
  line L19 (-8, -8.6) -> (17, -8.6)
  line L20 (17, -8.6) -> (17, -6.6)
  line L21 (-8, -26.9) -> (17, -26.9)
  line L22 (17, -26.9) -> (17, -24.9)
  line L23 (17, -24.9) -> (-8, -24.9)
  line L24 (-8, -24.9) -> (-8, -26.9)
  line L25 (9, 0) -> (9, -33.5) projected
  line L26 (9, -16.75) -> (0, -16.75)
  line L27 (0, 0) -> (0, -33.5) projected
  line L28 (9, -24.9) -> (0, -16.75)
  line L29 (9, -8.6) -> (0, -16.75)
  line L30 (0, -8.6) -> (9, -16.75)
  line L31 (9, -16.75) -> (0, -24.9)
  point P0 (4.5, 0)
  point P1 (4.5, -20.825)
  point P2 (4.5, -12.675)
  dimension "d25" = 2
  dimension "d26" = 2
hole "Hole3" at (0, 88.5, 20.825) at (0, 88.5, 12.675) direction (0, -1, 0) diameter 4 depth 6.5 counterbore diameter 4.6 counterbore depth 2
sketch "Sketch8" plane through (-4.5, 5.75, 33.5) normal (0, 0, 1) x (1, 0, 0)
  line L0 (26, 27.2497) -> (-17, 27.2497)
  line L1 (26, 31.2497) -> (-17, 31.2497)
  line L2 (4, 52.75) -> (-1, 52.75)
  line L3 (4, 61.75) -> (-1, 61.75)
  line L4 (10, 61.75) -> (5, 61.75)
  line L5 (9, 50.75) -> (5, 50.75) projected
  line L6 (0, 0) -> (0, 82.75) projected
  line L7 (9, 52.75) -> (0, 52.75)
  line L8 (0, 52.75) -> (0, 61.75)
  line L9 (0, 61.75) -> (9, 61.75)
  line L10 (9, 61.75) -> (9, 50.75)
  line L11 (9, 26.1825) -> (0, 26.1825) projected
  line L12 (0, 31.2497) -> (9, 31.2497)
  line L13 (9, 31.2497) -> (9, 26.1825)
  line L14 (9, 26.1825) -> (0, 26.1825)
  line L15 (0, 26.1825) -> (0, 31.2497)
  line L16 (9, 26.1825) -> (0, 31.2497)
  line L17 (0, 26.1825) -> (9, 31.2497)
  line L18 (10, 51.75) -> (0, 61.75)
  line L19 (0, 52.75) -> (9, 61.75)
  point P0 (4.5, -5.75)
  point P1 (4.5, 28.7161)
  point P2 (4.5, 57.25)
hole "Hole4" at (0, 34.4661, 33.5) at (0, 63, 33.5) direction (0, 0, -1) diameter 4 depth 6 counterbore diameter 4.6 counterbore depth 1.5
equation "\"d9\" = d10"
properties part number "middle_gear_holder" material "Nylon 6/6"
